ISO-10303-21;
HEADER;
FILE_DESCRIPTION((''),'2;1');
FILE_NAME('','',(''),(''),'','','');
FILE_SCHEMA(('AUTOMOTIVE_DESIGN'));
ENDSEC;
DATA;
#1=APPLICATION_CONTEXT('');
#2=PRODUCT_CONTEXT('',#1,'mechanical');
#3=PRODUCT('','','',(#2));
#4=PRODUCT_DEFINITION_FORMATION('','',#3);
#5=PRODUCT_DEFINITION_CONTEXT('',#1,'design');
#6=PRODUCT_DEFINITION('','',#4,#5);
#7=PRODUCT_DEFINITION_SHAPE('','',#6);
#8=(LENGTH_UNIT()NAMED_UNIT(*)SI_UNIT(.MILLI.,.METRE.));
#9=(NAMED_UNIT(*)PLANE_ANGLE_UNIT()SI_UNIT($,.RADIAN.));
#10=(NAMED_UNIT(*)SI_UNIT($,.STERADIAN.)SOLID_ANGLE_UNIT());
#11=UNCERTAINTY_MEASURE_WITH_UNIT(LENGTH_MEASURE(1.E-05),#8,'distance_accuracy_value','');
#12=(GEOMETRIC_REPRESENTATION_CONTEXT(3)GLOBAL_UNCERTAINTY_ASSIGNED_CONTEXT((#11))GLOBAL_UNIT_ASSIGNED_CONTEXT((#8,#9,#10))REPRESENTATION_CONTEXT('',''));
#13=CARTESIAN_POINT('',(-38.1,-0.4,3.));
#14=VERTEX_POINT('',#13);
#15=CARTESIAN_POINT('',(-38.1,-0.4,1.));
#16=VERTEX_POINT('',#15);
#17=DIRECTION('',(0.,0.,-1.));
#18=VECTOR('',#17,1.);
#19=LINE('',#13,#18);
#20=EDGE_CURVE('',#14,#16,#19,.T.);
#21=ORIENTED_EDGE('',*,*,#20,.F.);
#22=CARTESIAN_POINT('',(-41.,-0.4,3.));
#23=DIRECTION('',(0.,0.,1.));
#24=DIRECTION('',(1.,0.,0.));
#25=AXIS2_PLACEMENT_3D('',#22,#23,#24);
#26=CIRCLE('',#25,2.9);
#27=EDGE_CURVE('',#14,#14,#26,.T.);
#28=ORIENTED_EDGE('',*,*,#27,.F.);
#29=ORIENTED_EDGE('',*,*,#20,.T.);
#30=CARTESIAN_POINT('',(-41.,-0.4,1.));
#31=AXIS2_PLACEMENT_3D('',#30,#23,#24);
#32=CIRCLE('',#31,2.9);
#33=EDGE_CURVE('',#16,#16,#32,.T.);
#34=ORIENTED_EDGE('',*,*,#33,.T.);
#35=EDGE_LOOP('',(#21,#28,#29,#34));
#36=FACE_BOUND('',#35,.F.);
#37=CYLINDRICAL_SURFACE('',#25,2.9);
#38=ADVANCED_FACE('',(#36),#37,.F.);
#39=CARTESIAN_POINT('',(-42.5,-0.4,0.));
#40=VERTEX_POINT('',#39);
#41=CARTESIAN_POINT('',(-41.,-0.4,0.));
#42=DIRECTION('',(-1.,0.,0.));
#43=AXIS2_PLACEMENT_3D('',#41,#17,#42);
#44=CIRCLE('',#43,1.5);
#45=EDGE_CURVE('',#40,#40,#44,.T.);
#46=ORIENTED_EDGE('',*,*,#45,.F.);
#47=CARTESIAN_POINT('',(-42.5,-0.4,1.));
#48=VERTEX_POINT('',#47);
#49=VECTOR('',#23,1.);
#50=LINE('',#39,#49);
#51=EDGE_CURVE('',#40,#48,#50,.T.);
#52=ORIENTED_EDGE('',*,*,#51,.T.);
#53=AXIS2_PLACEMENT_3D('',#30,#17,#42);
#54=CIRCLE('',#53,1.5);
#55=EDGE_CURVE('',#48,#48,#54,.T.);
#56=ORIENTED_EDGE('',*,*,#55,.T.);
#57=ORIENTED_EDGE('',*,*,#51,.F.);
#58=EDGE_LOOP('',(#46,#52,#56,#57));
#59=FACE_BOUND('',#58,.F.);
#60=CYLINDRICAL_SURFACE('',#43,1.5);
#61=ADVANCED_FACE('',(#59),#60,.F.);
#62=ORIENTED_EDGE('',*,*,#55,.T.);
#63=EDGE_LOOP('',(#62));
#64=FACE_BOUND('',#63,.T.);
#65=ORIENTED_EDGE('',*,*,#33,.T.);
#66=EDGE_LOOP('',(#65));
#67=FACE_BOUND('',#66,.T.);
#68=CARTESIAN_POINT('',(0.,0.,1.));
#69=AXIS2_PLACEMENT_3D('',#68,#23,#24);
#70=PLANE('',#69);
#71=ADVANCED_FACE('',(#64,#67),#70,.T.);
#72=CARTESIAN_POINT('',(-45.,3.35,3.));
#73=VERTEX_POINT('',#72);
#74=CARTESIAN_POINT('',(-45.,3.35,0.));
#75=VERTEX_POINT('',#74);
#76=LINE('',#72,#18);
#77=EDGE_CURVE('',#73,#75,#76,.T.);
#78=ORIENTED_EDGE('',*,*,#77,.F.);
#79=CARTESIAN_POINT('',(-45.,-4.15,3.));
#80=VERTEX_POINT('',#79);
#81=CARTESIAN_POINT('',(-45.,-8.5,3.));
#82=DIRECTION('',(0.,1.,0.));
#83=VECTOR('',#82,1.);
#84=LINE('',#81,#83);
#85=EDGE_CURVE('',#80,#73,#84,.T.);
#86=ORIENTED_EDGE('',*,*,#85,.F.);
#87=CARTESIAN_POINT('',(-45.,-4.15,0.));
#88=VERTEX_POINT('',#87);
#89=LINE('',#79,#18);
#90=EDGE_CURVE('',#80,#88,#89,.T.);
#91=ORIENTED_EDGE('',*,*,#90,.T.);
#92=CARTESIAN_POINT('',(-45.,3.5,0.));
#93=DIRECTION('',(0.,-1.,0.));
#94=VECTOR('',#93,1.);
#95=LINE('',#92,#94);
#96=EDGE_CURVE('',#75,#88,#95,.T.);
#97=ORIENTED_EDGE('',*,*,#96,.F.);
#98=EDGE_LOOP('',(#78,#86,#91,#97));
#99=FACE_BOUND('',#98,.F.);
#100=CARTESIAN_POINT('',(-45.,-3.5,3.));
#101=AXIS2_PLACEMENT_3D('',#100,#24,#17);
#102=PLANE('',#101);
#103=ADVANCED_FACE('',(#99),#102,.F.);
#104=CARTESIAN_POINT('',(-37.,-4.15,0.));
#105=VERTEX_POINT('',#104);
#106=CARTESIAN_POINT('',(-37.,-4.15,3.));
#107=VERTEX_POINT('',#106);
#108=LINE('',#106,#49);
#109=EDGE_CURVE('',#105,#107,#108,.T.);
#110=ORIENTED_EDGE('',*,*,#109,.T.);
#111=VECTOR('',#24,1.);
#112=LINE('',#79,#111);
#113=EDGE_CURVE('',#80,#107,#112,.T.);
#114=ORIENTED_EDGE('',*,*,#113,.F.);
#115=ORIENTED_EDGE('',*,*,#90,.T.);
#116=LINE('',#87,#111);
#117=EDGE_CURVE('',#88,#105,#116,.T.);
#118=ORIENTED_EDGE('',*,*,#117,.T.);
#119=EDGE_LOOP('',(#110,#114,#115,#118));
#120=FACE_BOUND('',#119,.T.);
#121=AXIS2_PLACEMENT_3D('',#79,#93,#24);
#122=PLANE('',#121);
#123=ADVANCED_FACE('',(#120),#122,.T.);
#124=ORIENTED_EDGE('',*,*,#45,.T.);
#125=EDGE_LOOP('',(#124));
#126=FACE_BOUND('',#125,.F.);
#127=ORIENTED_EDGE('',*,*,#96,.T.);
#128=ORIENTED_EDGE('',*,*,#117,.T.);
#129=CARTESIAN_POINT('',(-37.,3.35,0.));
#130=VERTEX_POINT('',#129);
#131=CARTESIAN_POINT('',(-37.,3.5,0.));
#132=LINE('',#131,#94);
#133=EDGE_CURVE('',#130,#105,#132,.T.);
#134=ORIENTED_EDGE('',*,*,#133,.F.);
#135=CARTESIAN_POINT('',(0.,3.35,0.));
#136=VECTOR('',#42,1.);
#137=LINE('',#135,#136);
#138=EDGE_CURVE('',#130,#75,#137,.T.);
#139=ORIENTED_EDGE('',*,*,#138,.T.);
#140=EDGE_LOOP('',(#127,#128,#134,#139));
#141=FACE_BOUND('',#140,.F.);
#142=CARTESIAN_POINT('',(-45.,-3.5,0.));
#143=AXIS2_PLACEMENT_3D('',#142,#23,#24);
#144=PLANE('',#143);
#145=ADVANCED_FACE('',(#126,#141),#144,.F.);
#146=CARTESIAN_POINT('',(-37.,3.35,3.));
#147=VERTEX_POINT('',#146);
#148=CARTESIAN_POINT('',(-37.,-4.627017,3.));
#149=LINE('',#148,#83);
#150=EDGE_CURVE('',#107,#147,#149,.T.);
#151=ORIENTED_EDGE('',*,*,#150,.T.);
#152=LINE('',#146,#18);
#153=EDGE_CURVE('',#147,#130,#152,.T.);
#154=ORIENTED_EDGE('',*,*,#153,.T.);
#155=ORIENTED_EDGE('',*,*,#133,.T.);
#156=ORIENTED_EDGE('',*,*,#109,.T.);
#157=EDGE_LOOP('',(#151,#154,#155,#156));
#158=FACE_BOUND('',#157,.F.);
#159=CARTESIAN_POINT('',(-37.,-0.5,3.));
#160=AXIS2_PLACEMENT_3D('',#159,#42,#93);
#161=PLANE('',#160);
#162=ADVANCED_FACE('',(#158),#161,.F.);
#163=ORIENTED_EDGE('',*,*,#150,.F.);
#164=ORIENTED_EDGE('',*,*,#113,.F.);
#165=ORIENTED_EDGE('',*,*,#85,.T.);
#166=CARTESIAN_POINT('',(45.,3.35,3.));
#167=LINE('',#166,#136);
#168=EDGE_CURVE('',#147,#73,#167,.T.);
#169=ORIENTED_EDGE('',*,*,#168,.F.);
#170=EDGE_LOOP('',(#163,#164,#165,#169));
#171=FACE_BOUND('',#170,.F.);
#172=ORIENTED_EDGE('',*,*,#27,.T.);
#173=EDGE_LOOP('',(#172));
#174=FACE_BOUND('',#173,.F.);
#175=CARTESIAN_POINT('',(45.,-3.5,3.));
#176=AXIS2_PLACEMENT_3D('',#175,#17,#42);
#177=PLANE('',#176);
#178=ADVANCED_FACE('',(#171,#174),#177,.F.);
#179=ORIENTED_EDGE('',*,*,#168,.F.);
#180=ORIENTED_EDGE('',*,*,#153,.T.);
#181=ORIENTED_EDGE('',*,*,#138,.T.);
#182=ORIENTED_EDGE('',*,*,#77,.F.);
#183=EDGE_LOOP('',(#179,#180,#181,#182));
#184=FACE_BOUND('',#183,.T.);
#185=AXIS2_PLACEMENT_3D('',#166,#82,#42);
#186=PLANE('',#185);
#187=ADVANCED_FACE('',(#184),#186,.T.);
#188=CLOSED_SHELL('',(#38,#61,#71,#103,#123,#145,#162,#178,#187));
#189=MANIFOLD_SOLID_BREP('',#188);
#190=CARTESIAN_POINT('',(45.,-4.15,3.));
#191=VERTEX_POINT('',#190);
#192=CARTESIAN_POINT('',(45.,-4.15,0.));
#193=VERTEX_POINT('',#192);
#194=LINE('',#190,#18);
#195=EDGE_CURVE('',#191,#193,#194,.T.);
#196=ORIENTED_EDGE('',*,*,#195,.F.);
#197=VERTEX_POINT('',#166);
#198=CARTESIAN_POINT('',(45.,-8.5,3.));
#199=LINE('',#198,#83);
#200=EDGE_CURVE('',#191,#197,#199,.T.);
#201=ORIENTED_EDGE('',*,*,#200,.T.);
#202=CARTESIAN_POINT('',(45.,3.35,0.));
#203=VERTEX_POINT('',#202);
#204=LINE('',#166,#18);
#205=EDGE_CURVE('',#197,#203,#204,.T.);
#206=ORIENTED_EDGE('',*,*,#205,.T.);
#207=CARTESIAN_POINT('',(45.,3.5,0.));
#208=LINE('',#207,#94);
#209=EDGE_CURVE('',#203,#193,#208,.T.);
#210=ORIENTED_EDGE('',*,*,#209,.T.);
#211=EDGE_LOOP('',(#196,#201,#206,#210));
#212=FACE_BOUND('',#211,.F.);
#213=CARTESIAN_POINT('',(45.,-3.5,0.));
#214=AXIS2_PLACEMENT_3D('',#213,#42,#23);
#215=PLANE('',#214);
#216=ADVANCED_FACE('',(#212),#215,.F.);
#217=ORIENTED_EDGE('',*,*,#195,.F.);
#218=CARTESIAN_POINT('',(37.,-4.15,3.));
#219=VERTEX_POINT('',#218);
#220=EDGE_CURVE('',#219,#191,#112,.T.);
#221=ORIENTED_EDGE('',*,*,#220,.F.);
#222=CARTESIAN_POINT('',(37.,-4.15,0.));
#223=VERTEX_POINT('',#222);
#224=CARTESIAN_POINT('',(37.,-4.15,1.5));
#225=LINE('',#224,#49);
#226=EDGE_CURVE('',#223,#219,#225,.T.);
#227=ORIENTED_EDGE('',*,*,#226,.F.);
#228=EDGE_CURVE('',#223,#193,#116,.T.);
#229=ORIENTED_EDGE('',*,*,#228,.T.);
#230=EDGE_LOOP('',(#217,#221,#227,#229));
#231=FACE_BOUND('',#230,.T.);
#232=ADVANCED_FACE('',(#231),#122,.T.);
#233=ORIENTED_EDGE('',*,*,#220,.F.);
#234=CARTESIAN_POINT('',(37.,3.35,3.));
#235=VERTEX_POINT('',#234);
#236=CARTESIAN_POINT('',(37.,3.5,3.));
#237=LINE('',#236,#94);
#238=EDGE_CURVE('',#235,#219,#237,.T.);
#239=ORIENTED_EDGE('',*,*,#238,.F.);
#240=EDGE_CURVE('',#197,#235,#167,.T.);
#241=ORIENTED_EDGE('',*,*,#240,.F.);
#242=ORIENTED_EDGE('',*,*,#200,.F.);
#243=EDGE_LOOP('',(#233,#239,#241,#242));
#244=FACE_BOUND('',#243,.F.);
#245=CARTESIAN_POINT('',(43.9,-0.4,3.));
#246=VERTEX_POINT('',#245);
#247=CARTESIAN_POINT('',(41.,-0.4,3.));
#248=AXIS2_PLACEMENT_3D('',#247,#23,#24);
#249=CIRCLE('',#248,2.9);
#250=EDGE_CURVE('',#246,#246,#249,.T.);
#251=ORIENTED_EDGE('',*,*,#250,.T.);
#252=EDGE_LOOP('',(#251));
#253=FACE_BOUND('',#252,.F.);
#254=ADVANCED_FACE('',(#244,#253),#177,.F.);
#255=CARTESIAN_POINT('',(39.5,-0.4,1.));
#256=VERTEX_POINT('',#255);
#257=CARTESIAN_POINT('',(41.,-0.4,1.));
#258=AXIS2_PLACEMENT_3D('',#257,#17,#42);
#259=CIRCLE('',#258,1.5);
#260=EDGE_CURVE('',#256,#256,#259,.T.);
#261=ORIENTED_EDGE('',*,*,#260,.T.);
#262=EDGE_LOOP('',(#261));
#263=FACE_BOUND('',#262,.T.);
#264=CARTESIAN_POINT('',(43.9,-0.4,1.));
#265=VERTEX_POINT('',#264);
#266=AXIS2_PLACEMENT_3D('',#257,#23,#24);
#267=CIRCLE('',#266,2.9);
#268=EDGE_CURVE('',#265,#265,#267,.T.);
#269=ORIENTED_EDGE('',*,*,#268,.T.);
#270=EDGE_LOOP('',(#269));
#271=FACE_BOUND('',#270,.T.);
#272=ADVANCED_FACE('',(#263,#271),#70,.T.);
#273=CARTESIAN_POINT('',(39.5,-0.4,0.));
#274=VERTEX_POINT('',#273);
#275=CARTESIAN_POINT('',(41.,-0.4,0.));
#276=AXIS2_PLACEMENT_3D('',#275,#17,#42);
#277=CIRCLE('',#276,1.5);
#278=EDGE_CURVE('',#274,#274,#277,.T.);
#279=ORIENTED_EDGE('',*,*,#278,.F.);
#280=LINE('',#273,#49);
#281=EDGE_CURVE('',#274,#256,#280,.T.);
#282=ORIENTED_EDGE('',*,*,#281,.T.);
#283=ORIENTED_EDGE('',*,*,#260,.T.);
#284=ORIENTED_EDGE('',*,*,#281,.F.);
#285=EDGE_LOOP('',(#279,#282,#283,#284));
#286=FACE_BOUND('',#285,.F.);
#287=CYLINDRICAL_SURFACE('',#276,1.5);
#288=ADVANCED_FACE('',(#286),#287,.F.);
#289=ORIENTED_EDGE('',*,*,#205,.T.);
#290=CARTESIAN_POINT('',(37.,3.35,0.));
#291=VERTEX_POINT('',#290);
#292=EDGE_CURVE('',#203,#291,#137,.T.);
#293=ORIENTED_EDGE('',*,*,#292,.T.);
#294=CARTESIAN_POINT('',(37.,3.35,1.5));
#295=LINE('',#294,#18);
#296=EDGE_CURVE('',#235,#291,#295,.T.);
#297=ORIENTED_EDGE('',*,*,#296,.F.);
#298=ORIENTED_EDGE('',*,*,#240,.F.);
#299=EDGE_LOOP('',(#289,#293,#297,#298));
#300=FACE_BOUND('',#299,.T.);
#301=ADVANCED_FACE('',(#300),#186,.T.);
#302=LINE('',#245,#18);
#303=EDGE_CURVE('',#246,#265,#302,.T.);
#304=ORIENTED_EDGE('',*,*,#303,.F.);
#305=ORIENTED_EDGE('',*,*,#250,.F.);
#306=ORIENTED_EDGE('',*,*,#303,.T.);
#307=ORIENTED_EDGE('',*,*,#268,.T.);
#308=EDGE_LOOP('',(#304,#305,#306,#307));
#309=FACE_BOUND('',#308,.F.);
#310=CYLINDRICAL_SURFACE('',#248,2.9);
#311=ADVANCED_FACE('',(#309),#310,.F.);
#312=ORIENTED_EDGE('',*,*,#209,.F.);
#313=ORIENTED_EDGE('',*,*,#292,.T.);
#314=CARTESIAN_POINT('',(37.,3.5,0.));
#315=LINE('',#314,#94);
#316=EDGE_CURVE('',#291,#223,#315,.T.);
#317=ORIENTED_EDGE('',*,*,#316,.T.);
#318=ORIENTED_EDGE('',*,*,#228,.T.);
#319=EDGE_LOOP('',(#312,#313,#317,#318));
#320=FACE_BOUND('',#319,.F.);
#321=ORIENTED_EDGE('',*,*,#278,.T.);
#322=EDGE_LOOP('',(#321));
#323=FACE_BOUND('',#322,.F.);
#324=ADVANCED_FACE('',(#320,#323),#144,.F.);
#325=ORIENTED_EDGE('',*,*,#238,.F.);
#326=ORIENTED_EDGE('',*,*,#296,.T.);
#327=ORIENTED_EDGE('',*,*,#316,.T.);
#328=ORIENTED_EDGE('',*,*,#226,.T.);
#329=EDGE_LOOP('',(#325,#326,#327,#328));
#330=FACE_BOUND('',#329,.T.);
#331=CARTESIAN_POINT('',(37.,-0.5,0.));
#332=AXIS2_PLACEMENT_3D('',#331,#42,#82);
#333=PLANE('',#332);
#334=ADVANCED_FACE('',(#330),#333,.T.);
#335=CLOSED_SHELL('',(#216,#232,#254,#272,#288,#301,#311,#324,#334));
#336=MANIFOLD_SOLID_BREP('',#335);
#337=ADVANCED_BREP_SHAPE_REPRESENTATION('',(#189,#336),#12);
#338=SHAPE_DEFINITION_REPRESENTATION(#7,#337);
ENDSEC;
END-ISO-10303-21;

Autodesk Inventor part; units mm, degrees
ref_plane "YZ Plane" through (0, 0, 0) normal (1, 0, 0) x (0, 1, 0)
ref_plane "XZ Plane" through (0, 0, 0) normal (0, 1, 0) x (-1, 0, 0)
ref_plane "XY Plane" through (0, 0, 0) normal (0, 0, 1) x (1, 0, 0)
sketch "スケッチ1" plane through (0, 0, 0) normal (0, 0, 1) x (1, 0, 0)
  line L0 (-45, 3.5) -> (45, 3.5)
  line L1 (45, 3.5) -> (45, -3.5)
  line L2 (45, -3.5) -> (-45, -3.5)
  line L3 (-45, -3.5) -> (-45, 3.5)
  line L4 (-45, 3.5) -> (45, -3.5) construction
  line L5 (45, 3.5) -> (-45, -3.5) construction
  point P0 (0, 0)
  dimension "d0" = 90
  dimension "d1" = 7
extrude "押し出し1" add sketch "スケッチ1" along normal blind 3
sketch "スケッチ2" plane through (0, 0, 3) normal (0, 0, 1) x (1, 0, 0)
  circle A0 centre (-41, -0.4) radius 2.9
  circle A1 centre (41, -0.4) radius 2.9
  line L0 (45, 3.5) -> (-45, 3.5) projected
  line L1 (45, -3.5) -> (45, 3.5) projected
  point P0 (0, 0)
  dimension "d4" = 5.8
  dimension "d5" = 5.8
  dimension "d7" = 3.9
  dimension "d8" = 3.9
  dimension "d9" = 82
  dimension "d10" = 4
extrude "押し出し2" cut sketch "スケッチ2" against normal blind 2
sketch "スケッチ3" plane through (0, 0, 0) normal (0, 0, -1) x (-1, 0, 0)
  circle A0 centre (41, -0.4) radius 1.5
  circle A1 centre (-41, -0.4) radius 1.5
  line L0 (45, -3.5) -> (45, 3.5) projected
  line L1 (-45, 3.5) -> (-45, -3.5) projected
  line L2 (45, 3.5) -> (-45, 3.5) projected
  point P0 (0, 0)
  dimension "d13" = 3
  dimension "d14" = 3
  dimension "d15" = 4
  dimension "d16" = 4
  dimension "d17" = 3.9
  dimension "d18" = 3.9
extrude "押し出し3" cut sketch "スケッチ3" against normal blind 2
sketch "スケッチ4" plane through (-45, -3.5, 0) normal (0, -1, 0) x (1, 0, 0)
  line L0 (0, 0) -> (90, 0)
  line L1 (90, 0) -> (90, 3)
  line L2 (90, 3) -> (0, 3)
  line L3 (0, 3) -> (0, 0)
  point P0 (45, 0)
extrude "押し出し4" add sketch "スケッチ4" along normal blind 5
fillet "フィレット1" radius 4 1 edges at (0, -8.5, 3)
sketch "スケッチ6" plane through (0, 0, 0) normal (0, 0, -1) x (-1, 0, 0)
  line L0 (37, -0.5) -> (-37, -0.5)
  line L1 (-37, -0.5) -> (-37, 3.5)
  line L2 (-37, 3.5) -> (37, 3.5)
  line L3 (37, 3.5) -> (37, -0.5)
  line L4 (45, -8.5) -> (45, 3.5) projected
  line L5 (45, 3.5) -> (-45, 3.5) projected
  point P0 (0, 0)
  dimension "d24" = 74
  dimension "d25" = 8
  dimension "d26" = 0
  dimension "d27" = 4
extrude "押し出し5" cut sketch "スケッチ6" against normal blind 10
sketch "スケッチ7" plane through (0, 0, 3) normal (0, 0, 1) x (1, 0, 0)
  line L0 (-37, -10.5) -> (37, -10.5)
  line L1 (37, -10.5) -> (37, -0.5)
  line L2 (37, -0.5) -> (-37, -0.5)
  line L3 (-37, -0.5) -> (-37, -10.5)
  line L4 (-37, -0.5) -> (-37, 3.5) projected
  line L5 (37, -0.5) -> (-37, -0.5) projected
  point P0 (0, 0)
  dimension "d30" = 74
  dimension "d31" = 10
  dimension "d32" = 0
  dimension "d33" = 0
extrude "押し出し6" cut sketch "スケッチ7" against normal blind 10
sketch "スケッチ8" plane through (0, 0, 3) normal (0, 0, 1) x (1, 0, 0)
  line L0 (-45, -4.15) -> (45, -4.15)
  line L1 (45, -4.15) -> (45, 3.35)
  line L2 (45, 3.35) -> (-45, 3.35)
  line L3 (-45, 3.35) -> (-45, -4.15)
  circle A0 centre (41, -0.4) radius 1.5 projected
  line L4 (45, 3.5) -> (45, -4.627) projected
  line L5 (-45, -15.5359) -> (45, -15.5359)
  line L6 (45, -15.5359) -> (45, 4.4641)
  line L7 (45, 4.4641) -> (-45, 4.4641)
  line L8 (-45, 4.4641) -> (-45, -15.5359)
  point P0 (0, 0)
  dimension "d36" = 90
  dimension "d37" = 7.5
  dimension "d40" = 3.75
  dimension "d41" = 0
  dimension "d42" = 90
  dimension "d43" = 20
  dimension "d44" = 0
extrude "押し出し7" cut sketch "スケッチ8" against normal blind 10 contours L0 L4 L6 L5 L8 | L8 L7 L6 L4 L2
properties part number "LineTraceCoverBack"
